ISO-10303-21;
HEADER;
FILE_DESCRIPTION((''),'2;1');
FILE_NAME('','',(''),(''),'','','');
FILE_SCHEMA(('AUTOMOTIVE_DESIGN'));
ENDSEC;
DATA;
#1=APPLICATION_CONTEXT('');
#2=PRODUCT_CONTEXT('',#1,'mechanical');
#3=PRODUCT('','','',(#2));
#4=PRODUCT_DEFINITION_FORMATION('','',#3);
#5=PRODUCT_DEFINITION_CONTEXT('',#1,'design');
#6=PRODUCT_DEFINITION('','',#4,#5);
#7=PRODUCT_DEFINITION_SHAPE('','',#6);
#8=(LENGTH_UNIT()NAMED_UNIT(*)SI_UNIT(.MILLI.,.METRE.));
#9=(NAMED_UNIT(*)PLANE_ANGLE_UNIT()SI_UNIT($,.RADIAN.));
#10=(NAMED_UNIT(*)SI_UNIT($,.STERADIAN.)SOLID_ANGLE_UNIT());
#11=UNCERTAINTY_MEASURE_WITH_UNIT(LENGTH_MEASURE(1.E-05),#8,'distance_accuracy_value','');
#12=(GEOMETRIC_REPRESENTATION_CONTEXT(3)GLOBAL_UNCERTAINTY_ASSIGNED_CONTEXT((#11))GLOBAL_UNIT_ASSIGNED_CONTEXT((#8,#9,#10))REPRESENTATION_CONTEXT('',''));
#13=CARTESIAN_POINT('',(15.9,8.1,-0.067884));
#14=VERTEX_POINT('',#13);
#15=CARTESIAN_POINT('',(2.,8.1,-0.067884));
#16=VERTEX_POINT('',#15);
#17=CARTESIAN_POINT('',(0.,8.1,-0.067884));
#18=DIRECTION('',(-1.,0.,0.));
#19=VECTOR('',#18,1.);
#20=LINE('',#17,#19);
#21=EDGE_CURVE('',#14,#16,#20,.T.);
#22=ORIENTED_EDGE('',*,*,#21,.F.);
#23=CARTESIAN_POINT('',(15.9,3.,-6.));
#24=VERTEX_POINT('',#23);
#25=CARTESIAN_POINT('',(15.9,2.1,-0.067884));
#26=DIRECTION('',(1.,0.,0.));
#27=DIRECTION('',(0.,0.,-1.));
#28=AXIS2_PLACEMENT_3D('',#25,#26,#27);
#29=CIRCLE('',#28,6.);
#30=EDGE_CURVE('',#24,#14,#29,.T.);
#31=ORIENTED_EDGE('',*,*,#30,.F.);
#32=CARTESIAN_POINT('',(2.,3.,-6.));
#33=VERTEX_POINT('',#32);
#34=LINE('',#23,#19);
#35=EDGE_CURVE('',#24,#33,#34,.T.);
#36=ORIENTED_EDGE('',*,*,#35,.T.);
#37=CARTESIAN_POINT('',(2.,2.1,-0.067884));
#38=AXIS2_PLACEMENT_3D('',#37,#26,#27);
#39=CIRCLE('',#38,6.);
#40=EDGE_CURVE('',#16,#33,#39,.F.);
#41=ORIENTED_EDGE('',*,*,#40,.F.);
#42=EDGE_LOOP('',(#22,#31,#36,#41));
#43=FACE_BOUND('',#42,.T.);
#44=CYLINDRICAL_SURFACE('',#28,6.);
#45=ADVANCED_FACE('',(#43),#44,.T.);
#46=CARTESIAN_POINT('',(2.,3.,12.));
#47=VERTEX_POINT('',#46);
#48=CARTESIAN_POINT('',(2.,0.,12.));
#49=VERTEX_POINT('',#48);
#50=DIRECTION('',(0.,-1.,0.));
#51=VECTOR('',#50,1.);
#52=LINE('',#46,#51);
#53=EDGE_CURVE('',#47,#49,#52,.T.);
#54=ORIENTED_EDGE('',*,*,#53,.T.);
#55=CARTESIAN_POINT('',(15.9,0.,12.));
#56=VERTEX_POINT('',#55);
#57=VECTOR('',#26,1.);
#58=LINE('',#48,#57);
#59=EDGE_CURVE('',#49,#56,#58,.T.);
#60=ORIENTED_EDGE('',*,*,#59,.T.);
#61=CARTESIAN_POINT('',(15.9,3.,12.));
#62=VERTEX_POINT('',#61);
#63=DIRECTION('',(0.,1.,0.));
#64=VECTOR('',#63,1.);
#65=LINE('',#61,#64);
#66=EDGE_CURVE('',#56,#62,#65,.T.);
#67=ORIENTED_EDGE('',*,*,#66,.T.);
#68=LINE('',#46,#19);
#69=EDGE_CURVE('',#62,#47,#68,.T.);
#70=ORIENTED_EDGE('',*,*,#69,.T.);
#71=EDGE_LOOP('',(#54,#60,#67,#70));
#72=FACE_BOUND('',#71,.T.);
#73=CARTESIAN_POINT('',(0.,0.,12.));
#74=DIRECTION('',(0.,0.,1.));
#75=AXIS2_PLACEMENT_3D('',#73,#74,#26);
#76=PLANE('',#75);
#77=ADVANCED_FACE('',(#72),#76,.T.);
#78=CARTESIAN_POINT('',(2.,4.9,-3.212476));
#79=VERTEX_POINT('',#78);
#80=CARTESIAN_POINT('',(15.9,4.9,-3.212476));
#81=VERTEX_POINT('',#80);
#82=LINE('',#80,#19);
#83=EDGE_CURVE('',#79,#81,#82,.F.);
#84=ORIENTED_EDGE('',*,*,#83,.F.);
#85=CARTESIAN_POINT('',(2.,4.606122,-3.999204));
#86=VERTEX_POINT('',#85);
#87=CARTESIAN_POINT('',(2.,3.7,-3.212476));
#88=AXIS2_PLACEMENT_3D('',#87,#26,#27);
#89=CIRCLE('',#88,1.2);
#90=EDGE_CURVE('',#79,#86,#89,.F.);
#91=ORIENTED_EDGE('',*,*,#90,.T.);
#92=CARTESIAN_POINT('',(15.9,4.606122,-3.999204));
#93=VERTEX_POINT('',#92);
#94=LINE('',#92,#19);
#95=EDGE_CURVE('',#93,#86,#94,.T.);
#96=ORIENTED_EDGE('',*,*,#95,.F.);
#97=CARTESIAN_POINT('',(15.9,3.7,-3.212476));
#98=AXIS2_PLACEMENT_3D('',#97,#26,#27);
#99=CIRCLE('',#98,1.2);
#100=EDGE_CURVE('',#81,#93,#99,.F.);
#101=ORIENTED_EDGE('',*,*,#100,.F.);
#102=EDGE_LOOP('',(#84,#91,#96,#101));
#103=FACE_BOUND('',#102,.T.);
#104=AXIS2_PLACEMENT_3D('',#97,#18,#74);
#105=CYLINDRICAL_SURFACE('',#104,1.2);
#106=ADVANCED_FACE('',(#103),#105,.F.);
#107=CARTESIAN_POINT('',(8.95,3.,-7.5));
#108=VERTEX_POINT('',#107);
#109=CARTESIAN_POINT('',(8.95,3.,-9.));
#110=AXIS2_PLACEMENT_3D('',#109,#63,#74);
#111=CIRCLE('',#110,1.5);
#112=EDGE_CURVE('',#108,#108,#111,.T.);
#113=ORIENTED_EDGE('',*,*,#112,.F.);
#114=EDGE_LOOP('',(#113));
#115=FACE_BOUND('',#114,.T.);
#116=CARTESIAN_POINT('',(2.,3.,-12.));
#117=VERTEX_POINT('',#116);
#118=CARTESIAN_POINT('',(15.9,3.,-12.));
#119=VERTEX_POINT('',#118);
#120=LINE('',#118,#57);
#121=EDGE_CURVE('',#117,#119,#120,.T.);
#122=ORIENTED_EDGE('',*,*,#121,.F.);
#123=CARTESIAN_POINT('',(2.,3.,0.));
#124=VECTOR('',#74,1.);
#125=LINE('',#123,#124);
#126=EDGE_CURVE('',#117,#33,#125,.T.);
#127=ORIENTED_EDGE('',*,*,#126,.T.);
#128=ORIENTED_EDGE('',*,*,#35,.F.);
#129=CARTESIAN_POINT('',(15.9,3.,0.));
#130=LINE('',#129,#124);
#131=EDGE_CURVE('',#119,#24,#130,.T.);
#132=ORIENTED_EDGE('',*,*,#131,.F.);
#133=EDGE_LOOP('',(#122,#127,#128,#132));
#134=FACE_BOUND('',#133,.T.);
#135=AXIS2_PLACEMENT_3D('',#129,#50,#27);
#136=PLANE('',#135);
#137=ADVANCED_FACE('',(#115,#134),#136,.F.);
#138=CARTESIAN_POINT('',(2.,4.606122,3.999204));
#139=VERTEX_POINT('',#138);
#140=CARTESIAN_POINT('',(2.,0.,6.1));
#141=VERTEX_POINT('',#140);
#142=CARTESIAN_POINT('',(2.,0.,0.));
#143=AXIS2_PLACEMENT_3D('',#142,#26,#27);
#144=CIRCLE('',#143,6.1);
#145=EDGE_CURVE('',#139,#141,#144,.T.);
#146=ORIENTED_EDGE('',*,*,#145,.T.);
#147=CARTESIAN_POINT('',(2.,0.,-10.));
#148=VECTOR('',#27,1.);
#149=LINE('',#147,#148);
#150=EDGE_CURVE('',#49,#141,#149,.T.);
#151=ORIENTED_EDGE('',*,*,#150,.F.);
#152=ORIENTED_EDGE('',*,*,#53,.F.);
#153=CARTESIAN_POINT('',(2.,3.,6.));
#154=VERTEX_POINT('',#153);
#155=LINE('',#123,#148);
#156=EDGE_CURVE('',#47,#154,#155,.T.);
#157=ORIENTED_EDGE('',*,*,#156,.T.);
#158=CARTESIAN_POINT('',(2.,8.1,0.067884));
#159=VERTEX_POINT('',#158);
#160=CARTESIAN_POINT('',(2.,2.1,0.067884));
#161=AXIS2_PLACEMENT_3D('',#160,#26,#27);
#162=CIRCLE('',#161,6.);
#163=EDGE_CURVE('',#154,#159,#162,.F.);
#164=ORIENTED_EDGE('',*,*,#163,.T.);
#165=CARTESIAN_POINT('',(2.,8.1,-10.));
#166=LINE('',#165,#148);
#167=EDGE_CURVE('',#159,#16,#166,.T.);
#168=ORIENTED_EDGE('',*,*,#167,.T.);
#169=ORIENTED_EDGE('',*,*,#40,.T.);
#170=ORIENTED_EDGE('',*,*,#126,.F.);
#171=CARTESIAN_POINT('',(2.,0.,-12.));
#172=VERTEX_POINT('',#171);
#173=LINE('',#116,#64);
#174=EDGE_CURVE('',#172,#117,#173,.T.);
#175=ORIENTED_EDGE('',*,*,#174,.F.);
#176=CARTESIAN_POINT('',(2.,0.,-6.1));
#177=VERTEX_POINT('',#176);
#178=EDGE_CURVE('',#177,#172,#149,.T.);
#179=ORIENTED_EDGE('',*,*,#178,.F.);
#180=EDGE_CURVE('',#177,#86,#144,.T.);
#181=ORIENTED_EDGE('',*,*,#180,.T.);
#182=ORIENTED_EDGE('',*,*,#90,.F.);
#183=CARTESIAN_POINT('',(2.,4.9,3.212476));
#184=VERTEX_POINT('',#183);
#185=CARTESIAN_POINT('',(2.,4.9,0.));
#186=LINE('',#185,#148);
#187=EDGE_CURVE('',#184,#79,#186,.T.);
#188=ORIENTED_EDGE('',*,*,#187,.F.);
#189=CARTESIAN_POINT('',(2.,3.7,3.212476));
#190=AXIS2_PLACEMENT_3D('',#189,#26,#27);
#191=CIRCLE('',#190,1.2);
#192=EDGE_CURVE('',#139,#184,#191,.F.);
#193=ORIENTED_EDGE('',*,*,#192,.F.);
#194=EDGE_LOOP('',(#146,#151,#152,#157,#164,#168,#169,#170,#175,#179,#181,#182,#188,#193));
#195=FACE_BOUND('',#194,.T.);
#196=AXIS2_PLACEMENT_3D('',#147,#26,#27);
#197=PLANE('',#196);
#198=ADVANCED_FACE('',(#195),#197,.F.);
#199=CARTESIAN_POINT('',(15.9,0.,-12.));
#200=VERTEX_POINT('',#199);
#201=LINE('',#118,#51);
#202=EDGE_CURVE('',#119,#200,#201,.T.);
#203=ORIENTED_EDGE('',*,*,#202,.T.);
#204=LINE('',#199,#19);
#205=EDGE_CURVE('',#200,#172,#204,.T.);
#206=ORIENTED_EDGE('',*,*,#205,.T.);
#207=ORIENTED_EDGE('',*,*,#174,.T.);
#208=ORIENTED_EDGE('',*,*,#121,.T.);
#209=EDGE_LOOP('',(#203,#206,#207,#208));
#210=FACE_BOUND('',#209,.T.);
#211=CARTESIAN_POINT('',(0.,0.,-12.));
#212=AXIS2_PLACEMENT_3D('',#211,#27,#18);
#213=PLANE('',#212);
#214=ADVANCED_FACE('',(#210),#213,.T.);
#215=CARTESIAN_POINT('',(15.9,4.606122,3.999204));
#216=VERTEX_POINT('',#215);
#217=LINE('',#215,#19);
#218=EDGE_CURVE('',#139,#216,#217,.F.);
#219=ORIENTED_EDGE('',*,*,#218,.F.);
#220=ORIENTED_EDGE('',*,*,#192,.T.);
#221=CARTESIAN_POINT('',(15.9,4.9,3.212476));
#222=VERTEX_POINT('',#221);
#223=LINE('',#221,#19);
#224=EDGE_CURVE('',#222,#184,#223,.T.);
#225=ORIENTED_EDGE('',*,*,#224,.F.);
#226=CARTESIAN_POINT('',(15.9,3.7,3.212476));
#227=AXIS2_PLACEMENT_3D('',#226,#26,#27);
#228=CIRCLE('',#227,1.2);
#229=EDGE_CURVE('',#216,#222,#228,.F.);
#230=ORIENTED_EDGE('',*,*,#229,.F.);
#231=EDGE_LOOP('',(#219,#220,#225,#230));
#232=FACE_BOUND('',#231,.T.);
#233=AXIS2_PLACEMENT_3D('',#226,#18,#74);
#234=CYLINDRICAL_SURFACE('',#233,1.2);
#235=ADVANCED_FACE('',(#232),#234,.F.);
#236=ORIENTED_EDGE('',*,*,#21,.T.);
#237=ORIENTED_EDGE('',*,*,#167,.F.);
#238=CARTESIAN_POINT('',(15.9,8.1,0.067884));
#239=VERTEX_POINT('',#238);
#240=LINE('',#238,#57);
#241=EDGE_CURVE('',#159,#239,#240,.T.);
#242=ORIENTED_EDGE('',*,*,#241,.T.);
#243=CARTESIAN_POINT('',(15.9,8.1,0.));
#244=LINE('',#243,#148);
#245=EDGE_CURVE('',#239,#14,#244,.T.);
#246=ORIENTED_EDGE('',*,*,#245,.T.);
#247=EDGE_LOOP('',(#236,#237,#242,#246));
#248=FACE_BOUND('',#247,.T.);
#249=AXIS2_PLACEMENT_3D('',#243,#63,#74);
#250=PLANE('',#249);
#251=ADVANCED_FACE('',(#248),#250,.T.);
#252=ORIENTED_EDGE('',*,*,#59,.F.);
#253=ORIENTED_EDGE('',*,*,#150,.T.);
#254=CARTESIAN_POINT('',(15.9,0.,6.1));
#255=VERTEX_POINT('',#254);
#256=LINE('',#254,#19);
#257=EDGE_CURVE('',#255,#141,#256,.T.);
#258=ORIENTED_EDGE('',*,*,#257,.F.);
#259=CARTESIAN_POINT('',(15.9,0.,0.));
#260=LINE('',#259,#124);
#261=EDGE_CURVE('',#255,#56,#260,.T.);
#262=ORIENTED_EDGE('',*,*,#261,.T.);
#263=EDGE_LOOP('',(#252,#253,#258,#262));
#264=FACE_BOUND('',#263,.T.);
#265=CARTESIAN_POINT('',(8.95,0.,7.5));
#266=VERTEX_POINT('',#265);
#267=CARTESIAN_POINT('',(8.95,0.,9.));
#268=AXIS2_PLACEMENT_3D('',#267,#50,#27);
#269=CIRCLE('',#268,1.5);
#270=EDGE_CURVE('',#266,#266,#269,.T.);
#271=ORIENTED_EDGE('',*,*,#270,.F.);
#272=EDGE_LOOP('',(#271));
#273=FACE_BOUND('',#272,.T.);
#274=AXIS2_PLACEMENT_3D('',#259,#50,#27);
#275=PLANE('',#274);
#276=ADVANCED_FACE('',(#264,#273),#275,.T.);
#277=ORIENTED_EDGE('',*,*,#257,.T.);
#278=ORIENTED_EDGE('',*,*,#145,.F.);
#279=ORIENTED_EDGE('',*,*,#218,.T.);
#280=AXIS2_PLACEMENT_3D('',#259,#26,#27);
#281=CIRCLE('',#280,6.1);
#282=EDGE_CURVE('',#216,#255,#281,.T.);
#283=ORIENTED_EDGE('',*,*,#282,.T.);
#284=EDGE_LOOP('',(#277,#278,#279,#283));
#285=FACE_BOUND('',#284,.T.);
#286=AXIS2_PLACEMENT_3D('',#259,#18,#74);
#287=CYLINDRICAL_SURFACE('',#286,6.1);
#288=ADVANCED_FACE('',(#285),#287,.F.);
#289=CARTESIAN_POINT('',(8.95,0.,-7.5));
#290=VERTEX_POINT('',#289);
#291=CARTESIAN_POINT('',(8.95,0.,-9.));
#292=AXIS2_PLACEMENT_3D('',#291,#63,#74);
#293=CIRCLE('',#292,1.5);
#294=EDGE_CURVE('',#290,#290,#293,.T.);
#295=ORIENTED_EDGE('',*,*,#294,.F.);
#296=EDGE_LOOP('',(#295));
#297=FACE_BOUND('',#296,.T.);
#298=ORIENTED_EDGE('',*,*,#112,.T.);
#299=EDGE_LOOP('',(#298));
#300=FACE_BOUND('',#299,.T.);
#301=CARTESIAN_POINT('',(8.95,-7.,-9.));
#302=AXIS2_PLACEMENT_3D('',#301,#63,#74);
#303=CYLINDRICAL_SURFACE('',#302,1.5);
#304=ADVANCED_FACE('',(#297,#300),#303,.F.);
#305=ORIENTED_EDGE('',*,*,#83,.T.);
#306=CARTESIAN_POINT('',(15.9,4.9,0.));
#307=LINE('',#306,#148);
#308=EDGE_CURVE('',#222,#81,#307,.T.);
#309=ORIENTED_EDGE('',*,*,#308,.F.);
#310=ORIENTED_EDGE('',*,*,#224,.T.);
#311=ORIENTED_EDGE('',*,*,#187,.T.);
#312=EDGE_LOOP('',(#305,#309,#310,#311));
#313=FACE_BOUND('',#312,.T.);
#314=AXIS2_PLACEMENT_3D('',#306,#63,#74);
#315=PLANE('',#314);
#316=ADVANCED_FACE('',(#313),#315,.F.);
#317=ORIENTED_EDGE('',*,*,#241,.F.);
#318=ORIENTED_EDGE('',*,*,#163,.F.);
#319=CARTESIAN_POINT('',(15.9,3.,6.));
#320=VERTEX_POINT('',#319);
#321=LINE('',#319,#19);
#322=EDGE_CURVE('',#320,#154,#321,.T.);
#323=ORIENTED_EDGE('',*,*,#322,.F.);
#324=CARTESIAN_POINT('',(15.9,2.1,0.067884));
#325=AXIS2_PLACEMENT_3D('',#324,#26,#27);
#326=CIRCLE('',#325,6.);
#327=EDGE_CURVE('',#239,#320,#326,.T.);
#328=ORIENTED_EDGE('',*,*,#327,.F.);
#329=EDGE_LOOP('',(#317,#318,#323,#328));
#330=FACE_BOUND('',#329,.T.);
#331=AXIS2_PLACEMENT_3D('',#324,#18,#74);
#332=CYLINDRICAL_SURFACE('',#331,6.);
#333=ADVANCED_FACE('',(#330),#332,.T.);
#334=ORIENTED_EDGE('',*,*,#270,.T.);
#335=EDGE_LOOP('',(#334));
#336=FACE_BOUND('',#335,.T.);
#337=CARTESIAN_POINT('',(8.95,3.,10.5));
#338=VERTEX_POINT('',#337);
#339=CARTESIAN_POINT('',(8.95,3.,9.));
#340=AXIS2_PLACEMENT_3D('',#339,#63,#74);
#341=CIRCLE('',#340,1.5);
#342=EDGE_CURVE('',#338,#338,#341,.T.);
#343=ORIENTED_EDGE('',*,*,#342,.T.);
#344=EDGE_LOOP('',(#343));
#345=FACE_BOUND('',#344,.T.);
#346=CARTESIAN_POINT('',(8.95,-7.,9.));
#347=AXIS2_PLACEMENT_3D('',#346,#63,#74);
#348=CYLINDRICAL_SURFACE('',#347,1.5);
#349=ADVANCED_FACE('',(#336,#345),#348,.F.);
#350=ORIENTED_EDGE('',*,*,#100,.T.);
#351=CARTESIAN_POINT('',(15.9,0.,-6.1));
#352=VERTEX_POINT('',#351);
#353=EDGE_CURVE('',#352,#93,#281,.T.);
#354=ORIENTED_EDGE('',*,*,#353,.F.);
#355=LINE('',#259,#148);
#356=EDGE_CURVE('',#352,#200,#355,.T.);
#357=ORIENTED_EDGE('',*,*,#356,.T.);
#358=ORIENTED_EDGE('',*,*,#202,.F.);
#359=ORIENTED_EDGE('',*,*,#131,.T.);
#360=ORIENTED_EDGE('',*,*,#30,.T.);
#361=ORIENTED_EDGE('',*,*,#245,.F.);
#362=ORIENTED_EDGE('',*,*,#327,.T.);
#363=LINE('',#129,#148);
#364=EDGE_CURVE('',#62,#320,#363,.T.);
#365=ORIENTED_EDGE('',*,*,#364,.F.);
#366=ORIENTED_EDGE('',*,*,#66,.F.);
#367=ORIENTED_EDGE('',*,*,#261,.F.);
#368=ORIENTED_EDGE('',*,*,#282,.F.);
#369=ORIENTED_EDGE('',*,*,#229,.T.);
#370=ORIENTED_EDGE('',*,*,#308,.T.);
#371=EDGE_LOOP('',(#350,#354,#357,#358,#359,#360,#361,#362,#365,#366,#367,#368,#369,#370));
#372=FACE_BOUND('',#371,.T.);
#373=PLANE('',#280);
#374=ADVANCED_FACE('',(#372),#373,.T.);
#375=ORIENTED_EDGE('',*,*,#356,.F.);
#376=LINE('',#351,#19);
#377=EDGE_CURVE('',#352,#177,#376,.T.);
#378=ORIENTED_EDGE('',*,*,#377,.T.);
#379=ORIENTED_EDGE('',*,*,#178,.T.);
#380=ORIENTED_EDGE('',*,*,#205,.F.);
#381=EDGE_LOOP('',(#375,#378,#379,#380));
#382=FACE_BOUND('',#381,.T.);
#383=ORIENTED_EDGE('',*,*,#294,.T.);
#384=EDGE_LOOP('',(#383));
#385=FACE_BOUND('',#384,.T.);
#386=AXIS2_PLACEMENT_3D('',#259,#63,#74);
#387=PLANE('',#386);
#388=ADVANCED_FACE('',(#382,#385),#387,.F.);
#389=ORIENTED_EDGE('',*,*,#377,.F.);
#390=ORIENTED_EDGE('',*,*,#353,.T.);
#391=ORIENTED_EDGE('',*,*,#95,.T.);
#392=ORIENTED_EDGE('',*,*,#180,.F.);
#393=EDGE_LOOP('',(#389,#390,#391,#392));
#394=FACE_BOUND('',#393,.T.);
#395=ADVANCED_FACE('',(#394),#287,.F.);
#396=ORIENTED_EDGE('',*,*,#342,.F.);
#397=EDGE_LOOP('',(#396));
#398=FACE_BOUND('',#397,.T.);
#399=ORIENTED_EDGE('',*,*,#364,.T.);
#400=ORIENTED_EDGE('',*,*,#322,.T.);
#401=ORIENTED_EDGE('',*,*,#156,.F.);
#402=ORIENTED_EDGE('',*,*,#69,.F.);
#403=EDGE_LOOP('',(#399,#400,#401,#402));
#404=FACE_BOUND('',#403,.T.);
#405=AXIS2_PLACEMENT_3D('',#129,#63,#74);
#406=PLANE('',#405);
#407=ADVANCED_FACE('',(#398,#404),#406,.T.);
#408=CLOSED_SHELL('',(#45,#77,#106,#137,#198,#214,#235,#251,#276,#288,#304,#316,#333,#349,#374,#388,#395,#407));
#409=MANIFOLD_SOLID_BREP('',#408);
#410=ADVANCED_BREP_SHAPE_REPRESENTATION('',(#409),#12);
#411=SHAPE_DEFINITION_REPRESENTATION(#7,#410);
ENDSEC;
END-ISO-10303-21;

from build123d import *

# Parameters (mm, degrees)
RESSALTO_EXTRUS_O1_DEPTH   = 15.9
FILETE1_R                  = 6
FILETE2_R                  = 1.2
CORTE_EXTRUS_O2_DEPTH      = 20.463298795
CORTE_EXTRUS_O2_DEPTH_BACK = 20.463298795
ESBO_O3_W                  = 2
ESBO_O3_H                  = 20.053518914
ESBO_O4_W                  = 13.9
ESBO_O4_H                  = 3
RESSALTO_EXTRUS_O2_DEPTH   = 2
ESBO_O5_W                  = 13.9
ESBO_O5_H                  = 3
RESSALTO_EXTRUS_O3_DEPTH   = 2
CORTE_EXTRUS_O3_DEPTH      = 10


with BuildPart() as part:
    # Esboço1 → Ressalto-extrusão1 (new body)
    with BuildSketch(Plane(origin=(0, 0, 0), x_dir=(0, 0, -1), z_dir=(1, 0, 0))):
        with BuildLine():
            ThreePointArc((-3.633180425, 4.9), (-1.913112647, 5.792236183), (0, 6.1))
            ThreePointArc((0, 6.1), (1.913112647, 5.792236183), (3.633180425, 4.9))
            ThreePointArc((3.633180425, 4.9), (5.448504409, 2.742954557), (6.1, 0))
            Line((6.1, 0), (10, 0))
            Line((10, 0), (10, 3))
            Line((10, 3), (6, 3))
            Line((6, 3), (6, 8.1))
            Line((6, 8.1), (-6, 8.1))
            Line((-6, 8.1), (-6, 3))
            Line((-6, 3), (-10, 3))
            Line((-10, 3), (-10, 0))
            Line((-10, 0), (-6.1, 0))
            ThreePointArc((-6.1, 0), (-5.448504409, 2.742954557), (-3.633180425, 4.9))
        make_face()
        with BuildLine():
            ThreePointArc((3.633180425, 4.9), (1.913112647, 5.792236183), (0, 6.1))
            Line((0, 6.1), (0, 4.9))
            Line((0, 4.9), (3.633180425, 4.9))
        make_face()
        with BuildLine():
            Line((0, 4.9), (0, 6.1))
            ThreePointArc((0, 6.1), (-1.913112647, 5.792236183), (-3.633180425, 4.9))
            Line((-3.633180425, 4.9), (0, 4.9))
        make_face()
    extrude(amount=RESSALTO_EXTRUS_O1_DEPTH)

    # Filete1
    # the kernel refuses this fillet: 6 mm, written as the material it takes off along each edge
    with BuildSketch(Plane(origin=(-14.83028995, 8.1, 6), x_dir=(0, -1, 0), z_dir=(1, 0, 0))) as filete1_piece_1:
        with BuildLine():
            CenterArc((6, 5.93211598), FILETE1_R, 180, 81.373073441)
            Line((0, 5.93211598), (-0.12, 5.93211598))
            Line((-0.12, 5.93211598), (-0.12, 0))
            Line((-0.12, 0), (0, -0.12))
            ThreePointArc((0, -0.12), (2.55, -0.12), (5.082, -0.11864232))
            Line((5.082, -0.11864232), (5.1, 0))
        make_face()
    extrude(amount=45.5605799, mode=Mode.SUBTRACT)
    with BuildSketch(Plane(origin=(-14.83028995, 8.1, -6), x_dir=(0, -1, 0), z_dir=(1, 0, 0))) as filete1_piece_2:
        with BuildLine():
            CenterArc((6, -5.93211598), FILETE1_R, 98.626926559, 81.373073441)
            Line((0, -5.93211598), (-0.12, -5.93211598))
            Line((-0.12, -5.93211598), (-0.12, 0))
            Line((-0.12, 0), (0, 0.12))
            ThreePointArc((0, 0.12), (2.55, 0.12), (5.082, 0.11864232))
            Line((5.082, 0.11864232), (5.1, 0))
        make_face()
    extrude(amount=45.5605799, mode=Mode.SUBTRACT)

    # Filete2
    filete2_edges = [part.edges().sort_by_distance(p)[0] for p in [
        (7.95, 4.9, -3.633180425),
        (7.95, 4.9, 3.633180425),
    ]]
    fillet(filete2_edges, radius=FILETE2_R)

    # Esboço3 → Corte-extrusão2 (cut, two sides: drawn at the far end of the back side and taken through both)
    with BuildSketch(Plane(origin=(0, 3, 0), x_dir=(1, 0, 0), z_dir=(0, 1, 0)).offset(-CORTE_EXTRUS_O2_DEPTH_BACK)):
        with Locations((1, -0.026759457)):
            Rectangle(ESBO_O3_W, ESBO_O3_H)
    extrude(amount=CORTE_EXTRUS_O2_DEPTH + CORTE_EXTRUS_O2_DEPTH_BACK, mode=Mode.SUBTRACT)

    # Esboço4 → Ressalto-extrusão2 (add)
    with BuildSketch(Plane.XY.offset(10)):
        with Locations((8.95, 1.5)):
            Rectangle(ESBO_O4_W, ESBO_O4_H)
    extrude(amount=RESSALTO_EXTRUS_O2_DEPTH)

    # Esboço5 → Ressalto-extrusão3 (add)
    with BuildSketch(Plane(origin=(0, 0, -10), x_dir=(-1, 0, 0), z_dir=(0, 0, -1))):
        with Locations((-8.95, 1.5)):
            Rectangle(ESBO_O5_W, ESBO_O5_H)
    extrude(amount=RESSALTO_EXTRUS_O3_DEPTH)

    # Esboço8 → Corte-extrusão3 (cut)
    with BuildSketch(Plane(origin=(0, 3, 0), x_dir=(1, 0, 0), z_dir=(0, 1, 0))):
        with BuildLine():
            ThreePointArc((10.45, 9), (8.95, 10.5), (7.45, 9))
            Line((7.45, 9), (10.45, 9))
        make_face()
        with BuildLine():
            Line((10.45, 9), (7.45, 9))
            ThreePointArc((7.45, 9), (8.95, 7.5), (10.45, 9))
        make_face()
        with BuildLine():
            ThreePointArc((10.45, -9), (8.95, -7.5), (7.45, -9))
            Line((7.45, -9), (10.45, -9))
        make_face()
        with BuildLine():
            Line((10.45, -9), (7.45, -9))
            ThreePointArc((7.45, -9), (8.95, -10.5), (10.45, -9))
        make_face()
    extrude(amount=-CORTE_EXTRUS_O3_DEPTH, mode=Mode.SUBTRACT)


solid = part.part
